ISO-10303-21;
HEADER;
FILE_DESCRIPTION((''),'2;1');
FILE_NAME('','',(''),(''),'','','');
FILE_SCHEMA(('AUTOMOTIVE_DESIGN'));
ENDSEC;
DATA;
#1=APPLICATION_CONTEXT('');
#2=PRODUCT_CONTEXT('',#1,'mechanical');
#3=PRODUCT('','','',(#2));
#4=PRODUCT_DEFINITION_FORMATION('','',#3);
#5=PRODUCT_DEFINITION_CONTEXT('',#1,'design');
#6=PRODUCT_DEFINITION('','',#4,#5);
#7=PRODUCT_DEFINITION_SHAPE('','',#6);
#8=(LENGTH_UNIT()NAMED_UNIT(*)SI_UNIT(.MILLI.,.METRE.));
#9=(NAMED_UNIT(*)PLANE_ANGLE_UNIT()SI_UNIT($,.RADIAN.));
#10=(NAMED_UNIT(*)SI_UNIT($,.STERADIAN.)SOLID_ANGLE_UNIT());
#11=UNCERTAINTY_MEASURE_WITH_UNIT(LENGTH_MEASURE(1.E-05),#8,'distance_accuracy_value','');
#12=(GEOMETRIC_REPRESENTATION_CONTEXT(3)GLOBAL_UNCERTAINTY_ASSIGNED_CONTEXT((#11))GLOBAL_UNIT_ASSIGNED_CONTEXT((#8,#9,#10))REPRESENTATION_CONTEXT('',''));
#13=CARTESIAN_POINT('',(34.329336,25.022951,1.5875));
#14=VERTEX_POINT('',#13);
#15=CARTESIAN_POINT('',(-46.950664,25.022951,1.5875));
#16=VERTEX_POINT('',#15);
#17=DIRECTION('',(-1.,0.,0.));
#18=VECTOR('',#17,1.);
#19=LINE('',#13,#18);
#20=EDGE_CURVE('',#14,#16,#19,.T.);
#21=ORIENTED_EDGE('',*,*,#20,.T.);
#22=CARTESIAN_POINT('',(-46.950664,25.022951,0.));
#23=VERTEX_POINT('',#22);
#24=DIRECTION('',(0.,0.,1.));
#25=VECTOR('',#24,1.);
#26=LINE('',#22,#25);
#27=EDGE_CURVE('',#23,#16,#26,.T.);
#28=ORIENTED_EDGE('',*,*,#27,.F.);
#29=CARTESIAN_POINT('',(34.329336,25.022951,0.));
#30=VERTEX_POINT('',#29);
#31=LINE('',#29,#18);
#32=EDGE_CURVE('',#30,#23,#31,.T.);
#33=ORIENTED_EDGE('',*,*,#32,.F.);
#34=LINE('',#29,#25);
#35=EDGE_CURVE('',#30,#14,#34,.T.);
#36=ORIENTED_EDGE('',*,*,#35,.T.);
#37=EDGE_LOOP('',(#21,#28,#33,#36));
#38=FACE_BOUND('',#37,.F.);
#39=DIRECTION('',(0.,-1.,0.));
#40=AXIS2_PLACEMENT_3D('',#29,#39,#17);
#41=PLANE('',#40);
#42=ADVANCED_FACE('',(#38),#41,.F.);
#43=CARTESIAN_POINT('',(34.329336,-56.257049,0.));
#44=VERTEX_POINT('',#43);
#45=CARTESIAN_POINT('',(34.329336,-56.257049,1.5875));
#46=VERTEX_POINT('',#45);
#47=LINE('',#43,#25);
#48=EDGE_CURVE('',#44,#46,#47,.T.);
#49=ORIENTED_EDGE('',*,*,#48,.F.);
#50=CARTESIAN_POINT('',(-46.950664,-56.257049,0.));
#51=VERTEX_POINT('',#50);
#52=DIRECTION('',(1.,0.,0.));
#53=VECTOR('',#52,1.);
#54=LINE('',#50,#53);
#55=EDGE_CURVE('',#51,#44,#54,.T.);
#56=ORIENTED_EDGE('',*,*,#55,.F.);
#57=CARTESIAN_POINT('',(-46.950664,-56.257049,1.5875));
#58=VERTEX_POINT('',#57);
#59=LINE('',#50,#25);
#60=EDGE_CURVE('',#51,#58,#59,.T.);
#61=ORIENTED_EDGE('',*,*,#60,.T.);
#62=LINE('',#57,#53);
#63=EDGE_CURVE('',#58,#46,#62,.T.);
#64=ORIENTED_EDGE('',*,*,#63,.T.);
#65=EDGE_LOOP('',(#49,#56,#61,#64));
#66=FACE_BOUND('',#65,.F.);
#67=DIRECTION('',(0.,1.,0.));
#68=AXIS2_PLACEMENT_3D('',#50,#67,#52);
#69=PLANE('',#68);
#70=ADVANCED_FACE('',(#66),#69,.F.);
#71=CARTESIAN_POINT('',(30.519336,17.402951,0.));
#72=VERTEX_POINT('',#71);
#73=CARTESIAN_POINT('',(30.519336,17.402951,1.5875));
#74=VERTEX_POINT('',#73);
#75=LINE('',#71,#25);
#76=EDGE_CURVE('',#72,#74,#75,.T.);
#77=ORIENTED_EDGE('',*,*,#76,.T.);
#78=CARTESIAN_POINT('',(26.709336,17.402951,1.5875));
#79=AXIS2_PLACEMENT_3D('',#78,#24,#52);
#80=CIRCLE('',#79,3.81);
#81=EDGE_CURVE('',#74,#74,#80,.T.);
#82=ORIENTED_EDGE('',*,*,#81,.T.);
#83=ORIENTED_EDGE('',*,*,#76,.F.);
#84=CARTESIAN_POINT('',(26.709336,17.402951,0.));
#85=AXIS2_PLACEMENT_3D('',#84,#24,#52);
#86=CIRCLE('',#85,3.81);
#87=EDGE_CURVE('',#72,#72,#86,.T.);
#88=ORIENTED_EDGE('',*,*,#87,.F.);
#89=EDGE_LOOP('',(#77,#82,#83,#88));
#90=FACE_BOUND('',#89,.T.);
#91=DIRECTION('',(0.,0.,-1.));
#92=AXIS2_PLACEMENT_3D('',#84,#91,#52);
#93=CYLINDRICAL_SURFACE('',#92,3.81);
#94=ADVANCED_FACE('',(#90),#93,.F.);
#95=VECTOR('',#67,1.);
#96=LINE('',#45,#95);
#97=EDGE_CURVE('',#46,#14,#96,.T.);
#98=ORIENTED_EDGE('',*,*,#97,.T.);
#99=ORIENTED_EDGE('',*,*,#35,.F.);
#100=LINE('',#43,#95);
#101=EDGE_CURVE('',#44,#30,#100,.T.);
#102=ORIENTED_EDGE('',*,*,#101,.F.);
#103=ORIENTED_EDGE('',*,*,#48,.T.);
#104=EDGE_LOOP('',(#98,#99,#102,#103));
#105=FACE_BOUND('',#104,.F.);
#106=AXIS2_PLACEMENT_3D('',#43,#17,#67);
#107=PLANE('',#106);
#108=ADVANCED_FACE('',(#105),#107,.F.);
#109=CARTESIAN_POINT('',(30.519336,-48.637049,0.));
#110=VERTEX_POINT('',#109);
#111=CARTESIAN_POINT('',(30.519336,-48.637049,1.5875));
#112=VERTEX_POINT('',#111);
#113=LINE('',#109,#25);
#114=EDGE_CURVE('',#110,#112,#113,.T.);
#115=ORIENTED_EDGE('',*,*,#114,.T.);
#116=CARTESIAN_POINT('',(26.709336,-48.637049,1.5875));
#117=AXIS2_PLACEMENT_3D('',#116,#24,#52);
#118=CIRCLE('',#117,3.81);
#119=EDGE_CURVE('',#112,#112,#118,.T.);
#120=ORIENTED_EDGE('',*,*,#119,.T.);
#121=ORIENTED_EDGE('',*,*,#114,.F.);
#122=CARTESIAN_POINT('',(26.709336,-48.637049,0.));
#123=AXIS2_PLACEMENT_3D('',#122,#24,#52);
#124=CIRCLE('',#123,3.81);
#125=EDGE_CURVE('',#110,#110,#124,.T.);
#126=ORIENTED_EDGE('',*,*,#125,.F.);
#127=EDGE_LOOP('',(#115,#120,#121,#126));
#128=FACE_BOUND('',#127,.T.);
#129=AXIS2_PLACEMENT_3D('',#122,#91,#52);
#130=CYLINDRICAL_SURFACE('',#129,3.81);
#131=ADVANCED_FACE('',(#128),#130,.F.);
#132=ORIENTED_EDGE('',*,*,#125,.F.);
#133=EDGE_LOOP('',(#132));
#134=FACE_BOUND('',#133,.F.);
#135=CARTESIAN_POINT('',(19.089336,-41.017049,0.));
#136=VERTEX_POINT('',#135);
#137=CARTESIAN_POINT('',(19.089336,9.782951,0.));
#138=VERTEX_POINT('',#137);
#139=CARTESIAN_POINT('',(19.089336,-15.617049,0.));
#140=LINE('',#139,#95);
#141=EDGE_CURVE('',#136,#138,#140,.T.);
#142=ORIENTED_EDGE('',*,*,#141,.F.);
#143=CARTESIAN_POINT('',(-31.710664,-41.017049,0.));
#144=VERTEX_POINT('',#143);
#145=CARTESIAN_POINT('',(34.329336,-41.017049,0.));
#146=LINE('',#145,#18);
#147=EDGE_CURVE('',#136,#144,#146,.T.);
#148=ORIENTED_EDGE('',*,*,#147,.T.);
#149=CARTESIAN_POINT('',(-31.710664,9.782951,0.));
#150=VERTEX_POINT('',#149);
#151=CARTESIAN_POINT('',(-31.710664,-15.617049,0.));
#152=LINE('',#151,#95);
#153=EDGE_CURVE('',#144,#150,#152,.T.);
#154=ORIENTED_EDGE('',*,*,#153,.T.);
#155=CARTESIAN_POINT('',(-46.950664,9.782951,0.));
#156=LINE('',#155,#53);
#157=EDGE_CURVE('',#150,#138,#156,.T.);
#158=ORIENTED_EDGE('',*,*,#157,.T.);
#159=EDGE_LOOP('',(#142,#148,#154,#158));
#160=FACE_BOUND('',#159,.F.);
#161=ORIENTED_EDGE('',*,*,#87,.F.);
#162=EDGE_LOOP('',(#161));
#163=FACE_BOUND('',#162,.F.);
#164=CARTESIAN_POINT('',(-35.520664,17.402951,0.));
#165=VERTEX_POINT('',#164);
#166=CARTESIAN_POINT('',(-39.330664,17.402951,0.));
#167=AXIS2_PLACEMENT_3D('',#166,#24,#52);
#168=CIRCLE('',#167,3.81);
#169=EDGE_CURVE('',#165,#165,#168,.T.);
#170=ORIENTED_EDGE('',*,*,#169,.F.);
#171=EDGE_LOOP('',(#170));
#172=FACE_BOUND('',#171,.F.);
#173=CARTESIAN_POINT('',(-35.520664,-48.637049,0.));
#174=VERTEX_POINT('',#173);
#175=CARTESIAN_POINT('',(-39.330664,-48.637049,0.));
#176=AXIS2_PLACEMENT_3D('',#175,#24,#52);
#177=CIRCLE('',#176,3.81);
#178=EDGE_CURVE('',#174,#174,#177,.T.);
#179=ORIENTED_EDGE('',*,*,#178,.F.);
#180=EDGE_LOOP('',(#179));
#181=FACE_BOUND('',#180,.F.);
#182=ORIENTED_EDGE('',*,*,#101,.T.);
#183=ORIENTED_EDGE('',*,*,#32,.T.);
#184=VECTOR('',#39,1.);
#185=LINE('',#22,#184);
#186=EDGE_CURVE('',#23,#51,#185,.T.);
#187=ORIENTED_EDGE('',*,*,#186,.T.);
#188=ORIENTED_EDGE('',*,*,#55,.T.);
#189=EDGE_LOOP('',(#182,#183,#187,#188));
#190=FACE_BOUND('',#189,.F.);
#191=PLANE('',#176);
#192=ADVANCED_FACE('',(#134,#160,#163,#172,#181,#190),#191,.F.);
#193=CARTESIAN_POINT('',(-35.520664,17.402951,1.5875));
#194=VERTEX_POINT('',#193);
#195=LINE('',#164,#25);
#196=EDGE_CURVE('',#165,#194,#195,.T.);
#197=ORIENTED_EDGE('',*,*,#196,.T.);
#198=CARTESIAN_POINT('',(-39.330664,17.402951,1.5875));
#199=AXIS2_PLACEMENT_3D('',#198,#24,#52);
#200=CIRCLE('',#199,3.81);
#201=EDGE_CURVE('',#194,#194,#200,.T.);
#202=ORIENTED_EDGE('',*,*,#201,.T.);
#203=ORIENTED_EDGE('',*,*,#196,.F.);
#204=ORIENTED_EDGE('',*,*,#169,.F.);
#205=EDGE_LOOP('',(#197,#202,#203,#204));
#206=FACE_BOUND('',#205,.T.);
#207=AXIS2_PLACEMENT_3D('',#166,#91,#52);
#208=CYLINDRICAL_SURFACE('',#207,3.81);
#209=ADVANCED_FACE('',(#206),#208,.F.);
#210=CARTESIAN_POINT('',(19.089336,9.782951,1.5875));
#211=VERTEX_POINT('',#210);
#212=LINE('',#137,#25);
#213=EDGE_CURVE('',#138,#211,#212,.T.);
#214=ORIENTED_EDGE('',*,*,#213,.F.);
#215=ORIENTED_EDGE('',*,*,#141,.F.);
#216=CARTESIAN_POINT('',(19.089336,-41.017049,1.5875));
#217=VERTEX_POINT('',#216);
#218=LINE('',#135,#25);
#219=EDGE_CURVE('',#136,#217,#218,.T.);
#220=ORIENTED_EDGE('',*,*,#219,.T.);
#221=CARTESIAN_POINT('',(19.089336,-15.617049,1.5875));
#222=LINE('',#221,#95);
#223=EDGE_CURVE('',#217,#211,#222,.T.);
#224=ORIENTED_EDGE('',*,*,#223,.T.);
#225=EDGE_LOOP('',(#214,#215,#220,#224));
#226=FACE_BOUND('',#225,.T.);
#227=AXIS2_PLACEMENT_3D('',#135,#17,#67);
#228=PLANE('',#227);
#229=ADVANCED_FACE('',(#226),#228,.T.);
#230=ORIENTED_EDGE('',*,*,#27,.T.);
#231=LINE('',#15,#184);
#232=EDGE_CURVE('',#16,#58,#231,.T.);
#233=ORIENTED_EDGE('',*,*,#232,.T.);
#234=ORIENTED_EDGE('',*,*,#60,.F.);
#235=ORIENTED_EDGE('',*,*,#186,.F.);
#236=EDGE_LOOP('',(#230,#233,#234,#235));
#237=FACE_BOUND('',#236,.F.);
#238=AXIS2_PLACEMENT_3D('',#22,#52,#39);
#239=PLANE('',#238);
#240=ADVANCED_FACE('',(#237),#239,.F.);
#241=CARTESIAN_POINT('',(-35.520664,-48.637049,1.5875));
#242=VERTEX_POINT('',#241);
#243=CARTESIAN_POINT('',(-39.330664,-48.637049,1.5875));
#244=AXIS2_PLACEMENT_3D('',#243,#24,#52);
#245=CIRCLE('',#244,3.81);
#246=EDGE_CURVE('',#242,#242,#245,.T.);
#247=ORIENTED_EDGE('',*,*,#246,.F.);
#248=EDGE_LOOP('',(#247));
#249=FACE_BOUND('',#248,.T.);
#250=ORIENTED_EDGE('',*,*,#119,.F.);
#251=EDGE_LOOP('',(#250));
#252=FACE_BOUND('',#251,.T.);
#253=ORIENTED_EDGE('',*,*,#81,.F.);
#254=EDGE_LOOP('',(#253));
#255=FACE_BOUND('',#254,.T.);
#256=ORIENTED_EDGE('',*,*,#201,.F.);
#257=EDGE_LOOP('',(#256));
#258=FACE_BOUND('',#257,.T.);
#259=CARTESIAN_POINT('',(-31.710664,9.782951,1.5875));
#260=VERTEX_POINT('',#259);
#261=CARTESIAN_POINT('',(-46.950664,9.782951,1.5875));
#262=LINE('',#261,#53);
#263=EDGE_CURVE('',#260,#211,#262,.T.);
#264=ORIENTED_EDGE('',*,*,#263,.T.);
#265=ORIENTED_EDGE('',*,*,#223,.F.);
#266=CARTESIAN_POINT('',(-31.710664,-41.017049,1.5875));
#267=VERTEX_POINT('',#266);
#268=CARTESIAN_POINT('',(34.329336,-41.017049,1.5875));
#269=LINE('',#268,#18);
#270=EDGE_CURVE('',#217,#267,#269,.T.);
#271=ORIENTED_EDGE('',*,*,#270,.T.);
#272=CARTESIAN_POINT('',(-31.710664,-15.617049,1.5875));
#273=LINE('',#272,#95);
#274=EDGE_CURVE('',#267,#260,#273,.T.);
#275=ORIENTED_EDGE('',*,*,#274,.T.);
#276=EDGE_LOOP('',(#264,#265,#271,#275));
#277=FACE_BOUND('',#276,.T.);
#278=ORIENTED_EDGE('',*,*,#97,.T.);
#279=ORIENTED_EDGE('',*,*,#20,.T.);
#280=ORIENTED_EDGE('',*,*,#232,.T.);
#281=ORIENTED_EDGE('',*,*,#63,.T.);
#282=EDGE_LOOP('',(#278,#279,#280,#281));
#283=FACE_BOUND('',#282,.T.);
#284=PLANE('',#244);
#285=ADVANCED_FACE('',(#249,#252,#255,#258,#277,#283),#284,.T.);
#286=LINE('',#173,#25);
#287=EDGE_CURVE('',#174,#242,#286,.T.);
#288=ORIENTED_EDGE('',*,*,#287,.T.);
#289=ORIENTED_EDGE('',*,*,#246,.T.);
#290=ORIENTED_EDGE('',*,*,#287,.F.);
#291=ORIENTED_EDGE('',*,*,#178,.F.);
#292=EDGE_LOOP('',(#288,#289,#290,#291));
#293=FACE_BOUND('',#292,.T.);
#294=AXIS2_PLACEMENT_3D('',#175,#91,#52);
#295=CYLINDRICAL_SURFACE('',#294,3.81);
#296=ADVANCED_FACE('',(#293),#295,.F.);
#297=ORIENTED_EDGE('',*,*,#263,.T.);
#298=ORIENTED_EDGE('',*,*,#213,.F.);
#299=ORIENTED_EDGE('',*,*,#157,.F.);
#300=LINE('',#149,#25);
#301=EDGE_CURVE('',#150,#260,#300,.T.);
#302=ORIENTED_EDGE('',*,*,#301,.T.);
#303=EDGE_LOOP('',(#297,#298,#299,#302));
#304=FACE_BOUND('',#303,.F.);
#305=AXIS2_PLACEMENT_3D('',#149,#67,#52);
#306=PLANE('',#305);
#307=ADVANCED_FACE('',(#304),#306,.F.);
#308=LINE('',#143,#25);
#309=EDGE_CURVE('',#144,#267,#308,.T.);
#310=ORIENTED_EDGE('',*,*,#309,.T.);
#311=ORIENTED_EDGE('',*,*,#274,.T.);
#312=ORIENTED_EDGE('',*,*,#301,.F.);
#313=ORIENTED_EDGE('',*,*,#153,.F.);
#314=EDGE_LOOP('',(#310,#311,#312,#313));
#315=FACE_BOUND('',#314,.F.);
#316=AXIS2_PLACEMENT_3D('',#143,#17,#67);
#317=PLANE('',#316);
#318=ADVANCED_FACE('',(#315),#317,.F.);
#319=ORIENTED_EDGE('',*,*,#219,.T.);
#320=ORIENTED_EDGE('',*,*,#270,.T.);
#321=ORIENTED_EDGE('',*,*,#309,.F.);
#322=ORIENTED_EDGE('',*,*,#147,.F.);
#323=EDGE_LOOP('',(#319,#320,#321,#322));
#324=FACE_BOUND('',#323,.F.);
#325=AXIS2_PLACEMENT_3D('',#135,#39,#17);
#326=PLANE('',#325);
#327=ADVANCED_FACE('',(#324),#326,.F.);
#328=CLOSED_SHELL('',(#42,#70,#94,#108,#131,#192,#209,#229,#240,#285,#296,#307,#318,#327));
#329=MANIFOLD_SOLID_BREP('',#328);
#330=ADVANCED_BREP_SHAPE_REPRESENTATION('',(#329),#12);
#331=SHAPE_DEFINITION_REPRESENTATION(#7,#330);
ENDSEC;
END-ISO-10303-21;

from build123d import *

# Parameters (mm, degrees)
F0_W     = 15.24
F0_H     = 15.24
F0_R     = 3.81
F0_W_2   = 50.8
F0_H_2   = 50.8
F1_DEPTH = 1.5875


# Not quite as in the source:
# - a feature names something its author has since deleted; it is built from what else it names


with BuildPart() as f1:
    # F0 (on Top) → F1 (new body)
    with BuildSketch(Plane.XY):
        with Locations((-39.3306643713, -48.6370485475)):
            Rectangle(F0_W, F0_H)
        with Locations((-39.3306643713, -48.6370485475)):
            Circle(F0_R, mode=Mode.SUBTRACT)
        with Locations((26.7093356287, -48.6370485475)):
            Rectangle(F0_W, F0_H)
        with Locations((26.7093356287, -48.6370485475)):
            Circle(F0_R, mode=Mode.SUBTRACT)
        with Locations((-39.3306643713, 17.4029514525)):
            Rectangle(F0_W, F0_H)
        with Locations((-39.3306643713, 17.4029514525)):
            Circle(F0_R, mode=Mode.SUBTRACT)
        with Locations((26.7093356287, 17.4029514525)):
            Rectangle(F0_W, F0_H)
        with Locations((26.7093356287, 17.4029514525)):
            Circle(F0_R, mode=Mode.SUBTRACT)
        with Locations((-6.3106643713, 17.4029514525)):
            Rectangle(F0_W_2, F0_H)
        with Locations((-6.3106643713, -48.6370485475)):
            Rectangle(F0_W_2, F0_H)
        with Locations((-39.3306643713, -15.6170485475)):
            Rectangle(F0_W, F0_H_2)
        with Locations((26.7093356287, -15.6170485475)):
            Rectangle(F0_W, F0_H_2)
    extrude(amount=F1_DEPTH)


solid = f1.part
